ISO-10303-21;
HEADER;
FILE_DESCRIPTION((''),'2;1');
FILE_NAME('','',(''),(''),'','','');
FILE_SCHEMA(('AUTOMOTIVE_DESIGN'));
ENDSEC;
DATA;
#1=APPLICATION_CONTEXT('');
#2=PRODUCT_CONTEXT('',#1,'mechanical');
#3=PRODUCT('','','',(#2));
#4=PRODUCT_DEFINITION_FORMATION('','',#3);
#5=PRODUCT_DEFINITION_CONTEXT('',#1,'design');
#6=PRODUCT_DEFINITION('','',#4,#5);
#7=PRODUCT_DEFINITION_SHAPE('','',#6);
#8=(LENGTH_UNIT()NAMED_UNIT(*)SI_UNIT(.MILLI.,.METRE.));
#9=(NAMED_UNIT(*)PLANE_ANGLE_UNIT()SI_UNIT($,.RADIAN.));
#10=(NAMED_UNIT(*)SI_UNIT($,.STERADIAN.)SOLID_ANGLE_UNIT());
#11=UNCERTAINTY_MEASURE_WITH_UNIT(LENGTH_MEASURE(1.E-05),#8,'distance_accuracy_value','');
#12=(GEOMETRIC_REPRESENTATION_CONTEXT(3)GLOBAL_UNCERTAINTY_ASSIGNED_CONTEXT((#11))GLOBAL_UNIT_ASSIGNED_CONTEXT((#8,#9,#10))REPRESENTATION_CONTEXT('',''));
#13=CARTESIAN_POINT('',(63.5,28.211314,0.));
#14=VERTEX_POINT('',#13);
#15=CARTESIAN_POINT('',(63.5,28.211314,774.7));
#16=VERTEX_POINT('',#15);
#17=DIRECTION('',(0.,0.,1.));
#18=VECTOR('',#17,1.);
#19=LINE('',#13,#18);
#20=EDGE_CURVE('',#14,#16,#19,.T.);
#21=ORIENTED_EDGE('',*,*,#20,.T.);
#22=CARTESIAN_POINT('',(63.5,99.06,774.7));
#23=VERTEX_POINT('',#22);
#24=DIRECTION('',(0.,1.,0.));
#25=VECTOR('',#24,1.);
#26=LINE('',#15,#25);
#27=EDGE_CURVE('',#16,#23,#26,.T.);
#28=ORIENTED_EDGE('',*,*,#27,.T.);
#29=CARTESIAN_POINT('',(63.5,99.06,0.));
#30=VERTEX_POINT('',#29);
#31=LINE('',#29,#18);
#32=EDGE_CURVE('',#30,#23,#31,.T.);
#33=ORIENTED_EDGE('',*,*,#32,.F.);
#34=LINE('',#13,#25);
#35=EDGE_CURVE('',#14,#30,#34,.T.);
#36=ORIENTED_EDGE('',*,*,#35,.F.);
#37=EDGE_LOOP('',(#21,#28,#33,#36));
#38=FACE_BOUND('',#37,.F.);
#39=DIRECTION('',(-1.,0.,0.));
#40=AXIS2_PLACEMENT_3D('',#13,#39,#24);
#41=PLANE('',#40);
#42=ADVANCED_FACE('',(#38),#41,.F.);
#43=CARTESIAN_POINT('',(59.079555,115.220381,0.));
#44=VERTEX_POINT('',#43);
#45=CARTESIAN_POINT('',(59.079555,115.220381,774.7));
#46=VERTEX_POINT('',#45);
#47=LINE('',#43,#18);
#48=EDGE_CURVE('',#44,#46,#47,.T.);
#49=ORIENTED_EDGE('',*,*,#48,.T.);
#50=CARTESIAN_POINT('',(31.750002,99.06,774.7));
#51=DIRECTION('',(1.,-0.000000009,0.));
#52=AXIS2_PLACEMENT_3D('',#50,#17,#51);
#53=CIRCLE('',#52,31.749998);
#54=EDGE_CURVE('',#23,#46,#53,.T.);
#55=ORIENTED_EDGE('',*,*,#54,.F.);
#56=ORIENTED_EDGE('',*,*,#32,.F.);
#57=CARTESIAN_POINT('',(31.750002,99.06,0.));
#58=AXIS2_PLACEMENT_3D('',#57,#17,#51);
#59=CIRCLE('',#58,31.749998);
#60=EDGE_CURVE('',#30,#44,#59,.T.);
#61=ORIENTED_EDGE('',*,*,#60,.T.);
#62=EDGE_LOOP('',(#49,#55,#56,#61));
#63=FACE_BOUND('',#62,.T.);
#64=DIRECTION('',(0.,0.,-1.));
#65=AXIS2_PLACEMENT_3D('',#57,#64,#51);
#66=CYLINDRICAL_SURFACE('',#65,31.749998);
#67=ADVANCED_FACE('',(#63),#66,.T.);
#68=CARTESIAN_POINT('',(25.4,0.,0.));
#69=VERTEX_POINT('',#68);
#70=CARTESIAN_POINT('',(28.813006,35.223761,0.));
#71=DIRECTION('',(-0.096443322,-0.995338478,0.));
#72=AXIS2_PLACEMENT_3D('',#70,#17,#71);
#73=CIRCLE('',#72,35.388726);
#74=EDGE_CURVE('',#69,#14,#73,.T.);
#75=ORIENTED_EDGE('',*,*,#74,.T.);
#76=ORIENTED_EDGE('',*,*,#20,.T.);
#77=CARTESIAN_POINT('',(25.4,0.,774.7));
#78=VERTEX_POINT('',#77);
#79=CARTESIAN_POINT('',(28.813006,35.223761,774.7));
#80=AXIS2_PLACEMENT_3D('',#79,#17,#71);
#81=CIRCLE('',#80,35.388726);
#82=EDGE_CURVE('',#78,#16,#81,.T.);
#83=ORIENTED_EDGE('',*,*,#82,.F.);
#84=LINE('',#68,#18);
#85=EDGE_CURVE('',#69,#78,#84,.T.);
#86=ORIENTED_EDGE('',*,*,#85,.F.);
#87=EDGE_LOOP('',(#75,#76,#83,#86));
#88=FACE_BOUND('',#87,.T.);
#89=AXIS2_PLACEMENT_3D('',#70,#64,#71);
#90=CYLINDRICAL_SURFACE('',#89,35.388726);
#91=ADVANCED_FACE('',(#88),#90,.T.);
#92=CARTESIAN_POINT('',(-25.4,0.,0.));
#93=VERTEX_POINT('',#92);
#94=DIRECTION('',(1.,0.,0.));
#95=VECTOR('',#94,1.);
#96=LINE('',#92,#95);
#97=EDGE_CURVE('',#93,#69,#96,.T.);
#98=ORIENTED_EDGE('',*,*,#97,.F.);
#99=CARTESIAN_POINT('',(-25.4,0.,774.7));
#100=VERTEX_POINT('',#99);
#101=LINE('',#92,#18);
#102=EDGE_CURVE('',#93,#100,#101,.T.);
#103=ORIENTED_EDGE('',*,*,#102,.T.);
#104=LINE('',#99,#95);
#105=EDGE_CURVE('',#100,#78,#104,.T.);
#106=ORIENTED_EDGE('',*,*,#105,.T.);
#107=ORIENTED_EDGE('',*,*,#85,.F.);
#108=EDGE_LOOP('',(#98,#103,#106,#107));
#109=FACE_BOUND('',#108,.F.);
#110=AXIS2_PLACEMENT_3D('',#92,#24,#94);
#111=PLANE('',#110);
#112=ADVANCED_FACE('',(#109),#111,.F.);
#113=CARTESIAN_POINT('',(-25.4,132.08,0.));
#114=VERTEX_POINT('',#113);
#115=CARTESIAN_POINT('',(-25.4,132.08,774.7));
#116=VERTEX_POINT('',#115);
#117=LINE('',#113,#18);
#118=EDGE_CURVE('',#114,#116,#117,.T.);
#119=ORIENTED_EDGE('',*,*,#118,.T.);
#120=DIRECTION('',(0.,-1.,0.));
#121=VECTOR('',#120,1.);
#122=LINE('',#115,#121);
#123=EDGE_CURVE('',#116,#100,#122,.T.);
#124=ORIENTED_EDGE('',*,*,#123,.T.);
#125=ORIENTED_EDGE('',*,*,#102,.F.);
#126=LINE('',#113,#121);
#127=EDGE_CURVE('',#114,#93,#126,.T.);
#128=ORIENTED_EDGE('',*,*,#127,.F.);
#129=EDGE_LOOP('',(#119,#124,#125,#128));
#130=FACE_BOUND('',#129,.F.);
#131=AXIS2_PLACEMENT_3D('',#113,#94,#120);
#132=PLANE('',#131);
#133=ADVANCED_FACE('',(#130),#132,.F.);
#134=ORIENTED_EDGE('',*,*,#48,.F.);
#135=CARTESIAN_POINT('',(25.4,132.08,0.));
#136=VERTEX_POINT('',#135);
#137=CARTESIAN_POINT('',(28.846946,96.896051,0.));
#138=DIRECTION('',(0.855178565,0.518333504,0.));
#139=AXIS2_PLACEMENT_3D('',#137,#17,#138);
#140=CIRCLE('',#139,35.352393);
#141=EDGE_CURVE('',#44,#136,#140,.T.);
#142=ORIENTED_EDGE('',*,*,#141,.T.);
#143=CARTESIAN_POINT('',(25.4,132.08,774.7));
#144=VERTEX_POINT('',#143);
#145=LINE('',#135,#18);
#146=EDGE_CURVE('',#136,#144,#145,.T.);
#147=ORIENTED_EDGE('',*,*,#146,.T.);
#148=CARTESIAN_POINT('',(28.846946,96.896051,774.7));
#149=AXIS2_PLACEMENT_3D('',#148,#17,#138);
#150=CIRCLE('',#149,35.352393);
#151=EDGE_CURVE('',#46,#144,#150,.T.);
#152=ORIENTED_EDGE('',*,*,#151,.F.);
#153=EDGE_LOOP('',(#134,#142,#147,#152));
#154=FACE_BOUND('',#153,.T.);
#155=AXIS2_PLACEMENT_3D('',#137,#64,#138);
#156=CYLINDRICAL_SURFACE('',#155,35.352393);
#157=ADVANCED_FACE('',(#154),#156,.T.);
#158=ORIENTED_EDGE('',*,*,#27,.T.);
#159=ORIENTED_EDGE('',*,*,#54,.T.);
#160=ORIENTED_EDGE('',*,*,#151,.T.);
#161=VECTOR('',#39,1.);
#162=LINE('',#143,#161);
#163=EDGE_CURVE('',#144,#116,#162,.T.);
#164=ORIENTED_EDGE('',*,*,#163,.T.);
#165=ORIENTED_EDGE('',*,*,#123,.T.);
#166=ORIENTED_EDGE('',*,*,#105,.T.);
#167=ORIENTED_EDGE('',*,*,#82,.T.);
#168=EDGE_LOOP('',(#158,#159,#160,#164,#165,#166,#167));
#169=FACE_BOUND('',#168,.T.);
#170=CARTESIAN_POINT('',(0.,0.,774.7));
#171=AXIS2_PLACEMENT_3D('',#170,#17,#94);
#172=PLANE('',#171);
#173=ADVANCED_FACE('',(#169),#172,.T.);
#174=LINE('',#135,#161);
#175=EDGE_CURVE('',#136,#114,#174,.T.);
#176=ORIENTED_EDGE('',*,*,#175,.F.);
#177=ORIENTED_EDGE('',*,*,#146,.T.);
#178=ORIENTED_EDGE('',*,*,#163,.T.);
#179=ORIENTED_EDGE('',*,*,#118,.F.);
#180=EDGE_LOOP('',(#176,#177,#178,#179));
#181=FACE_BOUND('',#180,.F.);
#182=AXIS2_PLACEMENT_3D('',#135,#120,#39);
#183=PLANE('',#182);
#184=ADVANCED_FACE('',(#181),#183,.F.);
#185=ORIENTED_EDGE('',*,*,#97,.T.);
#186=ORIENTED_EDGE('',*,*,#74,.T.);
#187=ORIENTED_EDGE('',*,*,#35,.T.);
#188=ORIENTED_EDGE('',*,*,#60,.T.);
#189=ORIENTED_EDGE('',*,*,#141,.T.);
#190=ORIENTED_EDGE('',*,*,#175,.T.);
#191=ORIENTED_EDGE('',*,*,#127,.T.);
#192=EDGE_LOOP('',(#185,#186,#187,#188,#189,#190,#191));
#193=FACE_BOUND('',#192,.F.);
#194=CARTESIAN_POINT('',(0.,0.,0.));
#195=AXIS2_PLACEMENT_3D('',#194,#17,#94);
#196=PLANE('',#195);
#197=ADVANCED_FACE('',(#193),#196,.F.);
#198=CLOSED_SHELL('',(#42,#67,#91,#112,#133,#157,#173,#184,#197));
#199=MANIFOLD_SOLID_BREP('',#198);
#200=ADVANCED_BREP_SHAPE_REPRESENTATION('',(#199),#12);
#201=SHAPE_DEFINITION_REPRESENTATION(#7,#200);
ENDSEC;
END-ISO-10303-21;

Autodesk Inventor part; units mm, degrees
ref_plane "YZ Plane" through (0, 0, 0) normal (1, 0, 0) x (0, 1, 0)
ref_plane "XZ Plane" through (0, 0, 0) normal (0, 1, 0) x (-1, 0, 0)
ref_plane "XY Plane" through (0, 0, 0) normal (0, 0, 1) x (1, 0, 0)
sketch "Sketch1" plane through (0, 0, 0) normal (0, 0, 1) x (1, 0, 0)
  line L0 (0, 0) -> (0, 132.08)
  line L1 (0, 132.08) -> (25.4, 132.08)
  line L2 (0, 66.04) -> (63.5, 66.04)
  line L3 (0, 132.08) -> (0, 66.04)
  line L4 (0, 99.06) -> (31.75, 99.06)
  arc A0 (63.5, 99.06) -> (55.043838, 120.634513) centre (31.75, 99.06) ccw
  line L5 (0, 66.04) -> (0, 0)
  arc A1 (54.194148, 10.562869) -> (63.5, 33.02) centre (31.75, 33.02) ccw
  line L6 (63.5, 28.211314) -> (63.5, 99.06)
  arc A2 (59.079555, 115.220381) -> (25.4, 132.08) centre (28.846947, 96.896052) ccw
  line L7 (0, 0) -> (25.4, 0)
  arc A3 (25.4, 0) -> (63.5, 28.211314) centre (28.813006, 35.223762) ccw
  line L8 (0, 132.08) -> (-25.4, 132.08)
  line L9 (0, 1.27) -> (0, 132.08)
  line L10 (0, 132.08) -> (-25.4, 132.08)
  line L11 (-25.4, 132.08) -> (-25.4, 1.27)
  line L12 (-25.4, 0) -> (0, 0)
  line L13 (0, 0) -> (0, 132.08)
  line L14 (0, 132.08) -> (-25.4, 132.08)
  line L15 (-25.4, 132.08) -> (-25.4, 0)
  dimension "d0" = 132.08
  dimension "d1" = 25.4
  dimension "d2" = 63.5
  dimension "d3" = 25.4
  dimension "d4" = 25.4
sketch "Sketch1 outline for Extrusion1" plane through (0, 0, 0) normal (0, 0, 1) x (1, 0, 0)
  line L0 (-25.4, 0) -> (25.4, 0)
  arc A0 (25.4, 0) -> (63.5, 28.211314) centre (28.813006, 35.223762) ccw
  line L1 (63.5, 28.211314) -> (63.5, 99.06)
  arc A1 (63.5, 99.06) -> (59.079555, 115.220381) centre (31.75, 99.06) ccw
  arc A2 (59.079555, 115.220381) -> (25.4, 132.08) centre (28.846947, 96.896052) ccw
  line L2 (25.4, 132.08) -> (-25.4, 132.08)
  line L3 (-25.4, 132.08) -> (-25.4, 0)
extrude "Extrusion1" add sketch "Sketch1 outline for Extrusion1" along normal blind 774.7
properties part number "Chassis_Bumper(29in)"
